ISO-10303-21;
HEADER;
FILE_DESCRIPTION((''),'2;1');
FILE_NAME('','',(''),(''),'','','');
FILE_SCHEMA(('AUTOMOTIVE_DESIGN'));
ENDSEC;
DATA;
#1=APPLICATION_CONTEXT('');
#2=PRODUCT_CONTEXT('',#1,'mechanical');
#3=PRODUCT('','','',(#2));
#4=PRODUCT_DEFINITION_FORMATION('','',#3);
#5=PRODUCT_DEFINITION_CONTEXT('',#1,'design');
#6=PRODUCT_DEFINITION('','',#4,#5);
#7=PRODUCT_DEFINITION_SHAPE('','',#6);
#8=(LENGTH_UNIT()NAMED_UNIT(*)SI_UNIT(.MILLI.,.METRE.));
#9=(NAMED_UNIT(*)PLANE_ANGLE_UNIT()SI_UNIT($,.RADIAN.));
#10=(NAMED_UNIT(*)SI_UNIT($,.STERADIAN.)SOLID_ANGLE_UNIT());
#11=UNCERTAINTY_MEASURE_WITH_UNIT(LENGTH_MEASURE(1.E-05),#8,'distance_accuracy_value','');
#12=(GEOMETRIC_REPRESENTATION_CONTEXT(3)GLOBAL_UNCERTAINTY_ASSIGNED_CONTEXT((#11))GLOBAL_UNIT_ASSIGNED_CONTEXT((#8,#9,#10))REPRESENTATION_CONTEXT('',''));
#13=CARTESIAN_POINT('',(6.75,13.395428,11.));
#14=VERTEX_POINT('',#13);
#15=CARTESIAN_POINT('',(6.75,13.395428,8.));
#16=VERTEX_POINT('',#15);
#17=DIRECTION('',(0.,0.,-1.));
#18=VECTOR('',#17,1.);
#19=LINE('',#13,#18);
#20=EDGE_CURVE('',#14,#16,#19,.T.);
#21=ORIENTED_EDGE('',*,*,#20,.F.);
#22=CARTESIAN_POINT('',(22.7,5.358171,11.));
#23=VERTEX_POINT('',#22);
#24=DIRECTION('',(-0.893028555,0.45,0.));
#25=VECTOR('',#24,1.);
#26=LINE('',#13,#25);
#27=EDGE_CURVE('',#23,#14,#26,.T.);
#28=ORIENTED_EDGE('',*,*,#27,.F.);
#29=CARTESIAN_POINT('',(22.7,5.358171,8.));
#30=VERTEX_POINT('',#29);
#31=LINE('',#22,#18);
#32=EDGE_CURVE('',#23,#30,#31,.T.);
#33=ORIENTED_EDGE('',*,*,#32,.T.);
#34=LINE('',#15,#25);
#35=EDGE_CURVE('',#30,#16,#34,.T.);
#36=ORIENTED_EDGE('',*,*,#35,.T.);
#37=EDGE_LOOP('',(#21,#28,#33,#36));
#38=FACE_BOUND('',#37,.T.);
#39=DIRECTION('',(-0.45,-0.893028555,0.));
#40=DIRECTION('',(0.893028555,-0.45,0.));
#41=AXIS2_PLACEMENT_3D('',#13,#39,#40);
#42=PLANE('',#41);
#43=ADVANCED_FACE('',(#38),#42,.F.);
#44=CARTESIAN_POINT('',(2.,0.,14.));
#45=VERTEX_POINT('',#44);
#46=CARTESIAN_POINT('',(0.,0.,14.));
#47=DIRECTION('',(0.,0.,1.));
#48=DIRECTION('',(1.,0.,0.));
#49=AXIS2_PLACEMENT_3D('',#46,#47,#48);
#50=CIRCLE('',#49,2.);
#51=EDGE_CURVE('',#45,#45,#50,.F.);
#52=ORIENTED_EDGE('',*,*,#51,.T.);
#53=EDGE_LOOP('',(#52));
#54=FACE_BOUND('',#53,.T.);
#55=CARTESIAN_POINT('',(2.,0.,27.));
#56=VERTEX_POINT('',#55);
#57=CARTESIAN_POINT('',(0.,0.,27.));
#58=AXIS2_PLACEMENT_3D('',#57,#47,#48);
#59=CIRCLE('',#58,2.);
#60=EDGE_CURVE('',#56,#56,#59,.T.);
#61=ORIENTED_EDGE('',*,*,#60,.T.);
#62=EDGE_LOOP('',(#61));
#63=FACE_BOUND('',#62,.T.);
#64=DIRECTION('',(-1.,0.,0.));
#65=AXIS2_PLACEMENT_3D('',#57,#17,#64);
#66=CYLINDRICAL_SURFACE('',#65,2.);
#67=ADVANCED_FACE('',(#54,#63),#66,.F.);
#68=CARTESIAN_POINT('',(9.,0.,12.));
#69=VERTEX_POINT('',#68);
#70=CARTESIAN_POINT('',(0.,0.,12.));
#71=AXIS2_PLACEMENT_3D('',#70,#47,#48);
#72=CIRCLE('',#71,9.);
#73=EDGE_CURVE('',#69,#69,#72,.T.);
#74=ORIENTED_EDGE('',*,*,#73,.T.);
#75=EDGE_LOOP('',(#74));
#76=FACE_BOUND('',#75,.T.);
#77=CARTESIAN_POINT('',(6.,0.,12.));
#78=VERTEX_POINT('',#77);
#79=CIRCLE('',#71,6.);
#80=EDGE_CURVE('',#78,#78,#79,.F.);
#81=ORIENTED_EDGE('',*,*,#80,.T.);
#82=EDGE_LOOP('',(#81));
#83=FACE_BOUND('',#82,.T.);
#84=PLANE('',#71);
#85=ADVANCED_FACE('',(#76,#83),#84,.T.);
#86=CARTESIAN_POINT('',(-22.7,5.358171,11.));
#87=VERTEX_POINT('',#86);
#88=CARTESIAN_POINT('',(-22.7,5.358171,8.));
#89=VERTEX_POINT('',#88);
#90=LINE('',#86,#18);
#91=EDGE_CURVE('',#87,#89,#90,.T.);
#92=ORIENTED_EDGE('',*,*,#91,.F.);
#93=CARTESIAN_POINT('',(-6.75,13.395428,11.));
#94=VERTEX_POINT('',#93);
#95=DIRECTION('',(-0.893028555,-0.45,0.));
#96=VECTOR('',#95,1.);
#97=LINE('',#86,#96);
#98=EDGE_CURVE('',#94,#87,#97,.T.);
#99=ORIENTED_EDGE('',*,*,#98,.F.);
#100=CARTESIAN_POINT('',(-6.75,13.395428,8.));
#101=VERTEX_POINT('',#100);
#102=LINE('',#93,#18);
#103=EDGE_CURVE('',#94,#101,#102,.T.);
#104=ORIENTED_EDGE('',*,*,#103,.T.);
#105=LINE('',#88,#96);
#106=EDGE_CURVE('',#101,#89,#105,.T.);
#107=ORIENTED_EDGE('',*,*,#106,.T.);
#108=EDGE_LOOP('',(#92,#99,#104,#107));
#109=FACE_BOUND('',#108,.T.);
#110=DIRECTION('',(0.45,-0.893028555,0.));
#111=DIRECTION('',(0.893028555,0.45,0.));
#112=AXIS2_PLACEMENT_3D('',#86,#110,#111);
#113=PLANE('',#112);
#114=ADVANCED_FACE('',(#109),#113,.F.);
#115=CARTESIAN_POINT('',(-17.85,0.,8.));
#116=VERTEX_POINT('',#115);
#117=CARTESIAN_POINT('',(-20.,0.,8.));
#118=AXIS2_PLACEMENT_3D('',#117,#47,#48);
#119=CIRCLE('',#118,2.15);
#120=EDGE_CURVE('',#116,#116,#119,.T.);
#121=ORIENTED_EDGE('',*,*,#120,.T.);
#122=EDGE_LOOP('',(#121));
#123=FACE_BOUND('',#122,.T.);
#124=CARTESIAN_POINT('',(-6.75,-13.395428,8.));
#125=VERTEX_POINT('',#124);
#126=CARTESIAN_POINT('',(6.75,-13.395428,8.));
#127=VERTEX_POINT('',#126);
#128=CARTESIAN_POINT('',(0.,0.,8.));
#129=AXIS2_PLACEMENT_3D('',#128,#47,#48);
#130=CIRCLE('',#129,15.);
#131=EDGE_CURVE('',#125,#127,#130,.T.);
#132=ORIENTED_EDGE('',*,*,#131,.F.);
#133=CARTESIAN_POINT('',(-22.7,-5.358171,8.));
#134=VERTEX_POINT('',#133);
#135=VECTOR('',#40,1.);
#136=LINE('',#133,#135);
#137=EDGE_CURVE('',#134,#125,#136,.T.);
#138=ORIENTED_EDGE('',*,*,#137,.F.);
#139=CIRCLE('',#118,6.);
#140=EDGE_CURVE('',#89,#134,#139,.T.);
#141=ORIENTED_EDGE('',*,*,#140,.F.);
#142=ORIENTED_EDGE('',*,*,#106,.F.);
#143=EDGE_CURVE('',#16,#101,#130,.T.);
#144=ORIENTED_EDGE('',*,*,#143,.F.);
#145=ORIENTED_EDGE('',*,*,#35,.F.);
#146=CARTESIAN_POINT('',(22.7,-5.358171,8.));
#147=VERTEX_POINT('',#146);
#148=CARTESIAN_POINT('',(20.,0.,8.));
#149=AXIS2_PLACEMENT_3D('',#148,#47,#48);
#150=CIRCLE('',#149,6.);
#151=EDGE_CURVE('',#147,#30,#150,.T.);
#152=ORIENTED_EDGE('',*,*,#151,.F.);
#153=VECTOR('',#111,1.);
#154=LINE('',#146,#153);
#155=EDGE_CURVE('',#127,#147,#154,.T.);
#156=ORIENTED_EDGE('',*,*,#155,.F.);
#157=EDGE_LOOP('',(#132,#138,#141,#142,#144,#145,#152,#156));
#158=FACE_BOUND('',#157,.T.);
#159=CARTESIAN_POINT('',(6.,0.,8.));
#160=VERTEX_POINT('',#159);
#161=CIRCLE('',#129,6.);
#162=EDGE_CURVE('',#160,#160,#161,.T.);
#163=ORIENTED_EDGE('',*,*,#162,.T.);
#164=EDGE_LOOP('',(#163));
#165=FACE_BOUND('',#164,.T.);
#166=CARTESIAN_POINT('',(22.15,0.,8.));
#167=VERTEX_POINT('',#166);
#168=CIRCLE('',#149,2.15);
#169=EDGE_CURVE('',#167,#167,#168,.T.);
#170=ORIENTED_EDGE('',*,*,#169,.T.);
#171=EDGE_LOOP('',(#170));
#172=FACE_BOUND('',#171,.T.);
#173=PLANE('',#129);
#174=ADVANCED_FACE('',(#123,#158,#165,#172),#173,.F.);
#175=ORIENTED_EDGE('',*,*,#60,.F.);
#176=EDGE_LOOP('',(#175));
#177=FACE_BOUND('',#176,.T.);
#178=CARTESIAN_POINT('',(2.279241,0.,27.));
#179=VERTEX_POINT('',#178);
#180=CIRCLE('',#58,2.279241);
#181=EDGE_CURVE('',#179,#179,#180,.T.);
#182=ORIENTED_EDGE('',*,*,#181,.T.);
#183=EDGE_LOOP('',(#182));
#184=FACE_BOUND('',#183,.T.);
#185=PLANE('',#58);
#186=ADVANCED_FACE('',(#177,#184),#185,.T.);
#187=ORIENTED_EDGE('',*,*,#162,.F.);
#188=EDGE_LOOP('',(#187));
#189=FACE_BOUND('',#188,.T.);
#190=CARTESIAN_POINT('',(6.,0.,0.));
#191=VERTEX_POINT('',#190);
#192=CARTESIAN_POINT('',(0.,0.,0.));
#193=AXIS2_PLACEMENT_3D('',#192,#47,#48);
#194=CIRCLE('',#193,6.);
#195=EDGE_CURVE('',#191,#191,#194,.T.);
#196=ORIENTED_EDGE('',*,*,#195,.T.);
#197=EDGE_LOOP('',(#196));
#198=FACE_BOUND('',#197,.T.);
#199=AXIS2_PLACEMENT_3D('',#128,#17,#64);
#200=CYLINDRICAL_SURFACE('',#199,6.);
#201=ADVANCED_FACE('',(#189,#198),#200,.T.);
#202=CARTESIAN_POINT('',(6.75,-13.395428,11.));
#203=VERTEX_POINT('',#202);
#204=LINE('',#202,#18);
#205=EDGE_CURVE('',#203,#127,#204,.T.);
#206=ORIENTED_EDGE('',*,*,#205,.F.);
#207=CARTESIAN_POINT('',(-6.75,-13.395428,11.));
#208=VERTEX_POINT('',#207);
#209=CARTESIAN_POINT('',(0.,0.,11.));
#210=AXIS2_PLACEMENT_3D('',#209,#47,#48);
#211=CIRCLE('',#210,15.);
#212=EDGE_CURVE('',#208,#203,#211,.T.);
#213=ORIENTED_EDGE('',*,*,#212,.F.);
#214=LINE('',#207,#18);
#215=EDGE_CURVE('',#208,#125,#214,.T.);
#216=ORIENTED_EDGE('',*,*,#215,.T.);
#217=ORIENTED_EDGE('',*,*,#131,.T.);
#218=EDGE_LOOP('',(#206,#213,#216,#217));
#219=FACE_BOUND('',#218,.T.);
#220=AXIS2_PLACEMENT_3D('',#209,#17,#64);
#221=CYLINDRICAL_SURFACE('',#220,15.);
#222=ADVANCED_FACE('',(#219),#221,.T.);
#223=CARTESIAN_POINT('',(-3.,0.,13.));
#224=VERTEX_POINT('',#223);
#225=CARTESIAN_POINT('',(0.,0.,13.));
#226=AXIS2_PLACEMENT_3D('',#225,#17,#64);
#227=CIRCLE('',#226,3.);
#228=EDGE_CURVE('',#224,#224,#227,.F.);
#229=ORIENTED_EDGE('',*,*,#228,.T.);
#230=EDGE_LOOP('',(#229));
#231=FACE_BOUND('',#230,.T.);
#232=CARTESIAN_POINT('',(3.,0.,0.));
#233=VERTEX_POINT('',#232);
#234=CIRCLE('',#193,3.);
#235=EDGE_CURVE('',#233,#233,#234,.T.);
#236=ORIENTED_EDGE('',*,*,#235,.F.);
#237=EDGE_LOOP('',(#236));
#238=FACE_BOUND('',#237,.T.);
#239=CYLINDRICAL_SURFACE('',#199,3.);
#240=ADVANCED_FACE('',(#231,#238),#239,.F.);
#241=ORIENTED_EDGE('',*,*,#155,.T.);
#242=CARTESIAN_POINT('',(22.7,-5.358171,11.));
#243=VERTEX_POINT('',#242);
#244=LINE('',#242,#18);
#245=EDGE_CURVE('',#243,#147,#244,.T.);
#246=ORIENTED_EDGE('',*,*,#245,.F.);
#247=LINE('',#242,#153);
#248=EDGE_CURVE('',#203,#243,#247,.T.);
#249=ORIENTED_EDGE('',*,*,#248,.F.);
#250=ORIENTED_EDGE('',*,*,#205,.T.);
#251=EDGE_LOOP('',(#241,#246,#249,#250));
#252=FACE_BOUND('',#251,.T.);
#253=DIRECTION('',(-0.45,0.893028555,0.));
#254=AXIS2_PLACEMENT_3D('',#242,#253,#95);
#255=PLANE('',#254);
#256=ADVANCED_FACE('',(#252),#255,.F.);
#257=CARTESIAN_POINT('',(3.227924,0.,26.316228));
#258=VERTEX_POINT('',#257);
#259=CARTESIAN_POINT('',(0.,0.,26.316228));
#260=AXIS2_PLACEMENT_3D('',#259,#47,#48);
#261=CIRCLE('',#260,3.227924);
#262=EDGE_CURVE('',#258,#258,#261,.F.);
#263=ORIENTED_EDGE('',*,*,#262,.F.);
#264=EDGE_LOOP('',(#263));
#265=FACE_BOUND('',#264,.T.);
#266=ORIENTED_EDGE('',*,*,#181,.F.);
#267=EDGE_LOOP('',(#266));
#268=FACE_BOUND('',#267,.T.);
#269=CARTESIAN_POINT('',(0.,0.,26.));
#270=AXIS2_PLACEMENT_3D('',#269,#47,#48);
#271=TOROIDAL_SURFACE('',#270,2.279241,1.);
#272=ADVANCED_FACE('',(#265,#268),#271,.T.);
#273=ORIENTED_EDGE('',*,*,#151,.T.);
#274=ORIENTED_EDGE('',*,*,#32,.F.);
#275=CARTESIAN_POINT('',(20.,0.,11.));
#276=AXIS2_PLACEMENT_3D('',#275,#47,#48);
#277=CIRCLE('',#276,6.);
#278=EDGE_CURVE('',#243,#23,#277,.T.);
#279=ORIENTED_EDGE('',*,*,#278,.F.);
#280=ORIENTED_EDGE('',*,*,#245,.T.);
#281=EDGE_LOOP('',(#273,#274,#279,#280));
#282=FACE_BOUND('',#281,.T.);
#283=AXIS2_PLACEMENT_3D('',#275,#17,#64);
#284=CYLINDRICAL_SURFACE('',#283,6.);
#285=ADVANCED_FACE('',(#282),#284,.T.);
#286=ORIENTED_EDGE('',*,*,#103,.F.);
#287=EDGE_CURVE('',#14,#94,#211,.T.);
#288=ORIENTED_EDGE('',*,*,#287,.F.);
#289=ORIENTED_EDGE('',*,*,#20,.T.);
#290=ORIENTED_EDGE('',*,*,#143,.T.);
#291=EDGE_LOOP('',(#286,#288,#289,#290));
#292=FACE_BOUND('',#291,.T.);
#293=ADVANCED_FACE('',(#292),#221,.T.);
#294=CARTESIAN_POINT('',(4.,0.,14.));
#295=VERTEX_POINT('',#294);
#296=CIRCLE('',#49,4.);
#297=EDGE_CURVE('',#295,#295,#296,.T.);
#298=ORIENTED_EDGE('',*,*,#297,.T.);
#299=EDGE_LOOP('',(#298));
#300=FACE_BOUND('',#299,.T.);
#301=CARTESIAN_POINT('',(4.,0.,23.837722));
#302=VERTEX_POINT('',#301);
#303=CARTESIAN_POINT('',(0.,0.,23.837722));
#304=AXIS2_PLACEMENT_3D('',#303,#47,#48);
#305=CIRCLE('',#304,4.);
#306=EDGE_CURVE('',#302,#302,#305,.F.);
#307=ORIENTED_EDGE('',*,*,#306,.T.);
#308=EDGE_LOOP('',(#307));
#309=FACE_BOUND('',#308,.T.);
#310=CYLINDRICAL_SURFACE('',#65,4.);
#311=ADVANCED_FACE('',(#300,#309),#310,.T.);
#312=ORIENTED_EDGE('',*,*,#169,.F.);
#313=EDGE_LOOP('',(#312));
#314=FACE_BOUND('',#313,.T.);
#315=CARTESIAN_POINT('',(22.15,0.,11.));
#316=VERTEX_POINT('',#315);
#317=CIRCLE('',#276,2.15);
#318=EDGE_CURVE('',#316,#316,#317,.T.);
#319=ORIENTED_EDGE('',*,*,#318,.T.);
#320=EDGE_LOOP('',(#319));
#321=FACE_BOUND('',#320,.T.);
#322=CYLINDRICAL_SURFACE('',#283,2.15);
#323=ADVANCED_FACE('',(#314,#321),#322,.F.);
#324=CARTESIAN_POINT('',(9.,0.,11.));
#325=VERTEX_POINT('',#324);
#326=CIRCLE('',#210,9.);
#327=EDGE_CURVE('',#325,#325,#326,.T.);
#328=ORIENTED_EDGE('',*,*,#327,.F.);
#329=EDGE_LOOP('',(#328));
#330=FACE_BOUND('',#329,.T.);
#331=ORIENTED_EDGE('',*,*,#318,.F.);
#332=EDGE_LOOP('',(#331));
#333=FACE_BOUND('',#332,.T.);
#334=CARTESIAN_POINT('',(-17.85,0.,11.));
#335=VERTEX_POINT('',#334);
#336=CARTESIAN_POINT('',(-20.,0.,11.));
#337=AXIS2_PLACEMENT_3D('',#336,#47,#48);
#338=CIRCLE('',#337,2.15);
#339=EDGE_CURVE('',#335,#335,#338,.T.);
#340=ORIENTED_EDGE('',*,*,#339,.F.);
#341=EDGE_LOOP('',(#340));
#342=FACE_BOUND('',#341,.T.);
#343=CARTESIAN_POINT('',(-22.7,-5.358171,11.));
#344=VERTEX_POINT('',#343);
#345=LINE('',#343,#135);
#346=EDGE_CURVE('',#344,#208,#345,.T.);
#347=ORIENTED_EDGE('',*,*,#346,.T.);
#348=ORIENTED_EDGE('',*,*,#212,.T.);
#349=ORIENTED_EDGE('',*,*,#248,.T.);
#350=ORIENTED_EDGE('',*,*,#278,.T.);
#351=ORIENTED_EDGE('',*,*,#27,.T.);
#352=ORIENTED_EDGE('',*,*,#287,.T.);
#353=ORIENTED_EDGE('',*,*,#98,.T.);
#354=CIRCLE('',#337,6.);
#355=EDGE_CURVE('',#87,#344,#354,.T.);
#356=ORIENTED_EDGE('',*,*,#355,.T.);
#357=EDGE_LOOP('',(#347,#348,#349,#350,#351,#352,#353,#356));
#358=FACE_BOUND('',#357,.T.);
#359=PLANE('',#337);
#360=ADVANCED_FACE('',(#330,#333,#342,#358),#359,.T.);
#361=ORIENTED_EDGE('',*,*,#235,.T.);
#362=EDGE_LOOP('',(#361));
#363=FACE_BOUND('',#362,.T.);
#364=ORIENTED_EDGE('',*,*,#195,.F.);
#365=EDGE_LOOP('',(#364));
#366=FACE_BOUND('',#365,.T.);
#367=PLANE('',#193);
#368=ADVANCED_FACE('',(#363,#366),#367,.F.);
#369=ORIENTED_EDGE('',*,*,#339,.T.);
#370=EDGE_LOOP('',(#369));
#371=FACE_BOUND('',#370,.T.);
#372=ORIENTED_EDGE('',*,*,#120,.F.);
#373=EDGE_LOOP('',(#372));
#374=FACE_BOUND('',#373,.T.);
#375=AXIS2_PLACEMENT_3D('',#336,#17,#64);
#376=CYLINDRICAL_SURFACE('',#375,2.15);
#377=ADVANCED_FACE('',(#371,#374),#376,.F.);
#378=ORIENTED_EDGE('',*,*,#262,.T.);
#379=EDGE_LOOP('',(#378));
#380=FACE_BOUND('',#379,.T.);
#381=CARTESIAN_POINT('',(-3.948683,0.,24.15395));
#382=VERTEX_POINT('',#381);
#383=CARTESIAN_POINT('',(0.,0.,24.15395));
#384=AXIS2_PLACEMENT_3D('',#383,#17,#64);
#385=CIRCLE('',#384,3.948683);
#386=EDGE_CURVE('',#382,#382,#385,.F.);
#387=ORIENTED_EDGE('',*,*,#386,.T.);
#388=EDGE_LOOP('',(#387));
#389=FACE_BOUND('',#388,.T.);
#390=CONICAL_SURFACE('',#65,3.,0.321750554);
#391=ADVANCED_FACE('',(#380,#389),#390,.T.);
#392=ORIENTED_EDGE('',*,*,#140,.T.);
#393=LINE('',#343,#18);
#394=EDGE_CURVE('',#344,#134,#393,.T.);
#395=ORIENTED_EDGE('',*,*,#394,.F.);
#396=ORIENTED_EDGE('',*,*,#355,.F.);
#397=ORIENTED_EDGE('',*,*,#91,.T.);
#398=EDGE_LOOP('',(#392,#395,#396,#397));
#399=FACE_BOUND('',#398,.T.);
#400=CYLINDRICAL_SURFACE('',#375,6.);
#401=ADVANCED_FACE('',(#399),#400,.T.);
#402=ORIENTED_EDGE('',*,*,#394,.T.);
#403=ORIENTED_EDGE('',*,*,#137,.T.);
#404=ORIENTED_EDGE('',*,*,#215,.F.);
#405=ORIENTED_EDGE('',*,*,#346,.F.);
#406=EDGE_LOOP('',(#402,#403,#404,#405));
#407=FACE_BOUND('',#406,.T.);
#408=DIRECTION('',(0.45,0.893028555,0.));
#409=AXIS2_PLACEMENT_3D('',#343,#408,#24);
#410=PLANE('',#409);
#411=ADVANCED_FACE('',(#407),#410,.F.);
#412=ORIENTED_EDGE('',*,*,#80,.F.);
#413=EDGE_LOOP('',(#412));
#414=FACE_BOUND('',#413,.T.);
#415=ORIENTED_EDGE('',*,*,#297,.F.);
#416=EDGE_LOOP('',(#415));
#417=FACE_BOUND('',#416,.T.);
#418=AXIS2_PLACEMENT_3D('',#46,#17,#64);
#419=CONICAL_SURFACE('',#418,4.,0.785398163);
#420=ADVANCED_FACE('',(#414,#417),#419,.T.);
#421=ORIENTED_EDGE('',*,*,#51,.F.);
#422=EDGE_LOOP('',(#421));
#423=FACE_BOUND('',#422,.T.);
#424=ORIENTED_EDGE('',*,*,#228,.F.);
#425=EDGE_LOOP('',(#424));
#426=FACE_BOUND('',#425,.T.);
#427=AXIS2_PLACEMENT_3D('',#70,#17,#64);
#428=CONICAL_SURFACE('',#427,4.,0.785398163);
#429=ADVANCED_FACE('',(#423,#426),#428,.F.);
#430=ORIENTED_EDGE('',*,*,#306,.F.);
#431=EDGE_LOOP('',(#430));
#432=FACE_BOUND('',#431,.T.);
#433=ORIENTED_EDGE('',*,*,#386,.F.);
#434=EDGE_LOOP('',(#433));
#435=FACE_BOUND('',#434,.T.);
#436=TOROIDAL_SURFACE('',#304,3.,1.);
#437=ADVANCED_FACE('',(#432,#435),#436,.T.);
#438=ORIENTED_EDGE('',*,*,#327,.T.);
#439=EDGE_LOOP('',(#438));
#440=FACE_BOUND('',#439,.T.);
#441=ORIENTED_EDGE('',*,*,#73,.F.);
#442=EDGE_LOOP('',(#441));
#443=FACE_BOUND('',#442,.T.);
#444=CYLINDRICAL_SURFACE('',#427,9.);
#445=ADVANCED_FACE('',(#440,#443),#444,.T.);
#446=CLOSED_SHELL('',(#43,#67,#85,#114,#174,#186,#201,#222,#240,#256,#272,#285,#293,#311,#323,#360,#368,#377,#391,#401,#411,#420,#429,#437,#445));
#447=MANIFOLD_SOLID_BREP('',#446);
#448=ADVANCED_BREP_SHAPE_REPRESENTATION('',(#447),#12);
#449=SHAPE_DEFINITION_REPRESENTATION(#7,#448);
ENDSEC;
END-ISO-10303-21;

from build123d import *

# Parameters (mm, degrees)
SKETCH_1_R      = 6
SKETCH_1_R_2    = 3
EXTRUDE_1_DEPTH = 8
SKETCH_2_R      = 9
SKETCH_2_R_2    = 3
EXTRUDE_2_DEPTH = 4
SKETCH_3_R      = 4
SKETCH_3_R_2    = 2
EXTRUDE_3_DEPTH = 15
CHAMFER_1_SIZE  = 2
CHAMFER_2_SIZE  = 3
CHAMFER_2_SIZE2 = 1
FILLET_1_R      = 1
SKETCH_4_R      = 9
SKETCH_4_R_2    = 2.15
EXTRUDE_5_DEPTH = 3


with BuildPart() as part:
    # 草图1 → 凸台-拉伸1 (new body)
    with BuildSketch(Plane.XY):
        Circle(SKETCH_1_R)
        Circle(SKETCH_1_R_2, mode=Mode.SUBTRACT)
    extrude(amount=EXTRUDE_1_DEPTH)

    # 草图2 → 凸台-拉伸2 (add)
    with BuildSketch(Plane.XY.offset(8)):
        Circle(SKETCH_2_R)
        Circle(SKETCH_2_R_2, mode=Mode.SUBTRACT)
    extrude(amount=EXTRUDE_2_DEPTH)

    # 草图3 → 凸台-拉伸3 (add)
    with BuildSketch(Plane.XY.offset(12)):
        Circle(SKETCH_3_R)
        Circle(SKETCH_3_R_2, mode=Mode.SUBTRACT)
    extrude(amount=EXTRUDE_3_DEPTH)

    # 倒角1
    # the kernel refuses this chamfer: 2 mm, written as the material it adds along each edge
    with BuildSketch(Plane(origin=(0, 0, 12), x_dir=(1, 0, 0), z_dir=(0, -1, 0))) as chamfer_1_piece_1:
        Polygon((4 + CHAMFER_1_SIZE, 0), (4, CHAMFER_1_SIZE), (4, 0), align=None)
    revolve(axis=Axis((0, 0, 12), (0, 0, 1)))
    # the kernel refuses this chamfer: 2 mm, written as the material it takes off along each edge
    with BuildSketch(Plane(origin=(0, 0, 12), x_dir=(1, 0, 0), z_dir=(0, -1, 0))) as chamfer_1_2_piece_1_section:
        Polygon((2 + CHAMFER_1_SIZE, 0), (2, CHAMFER_1_SIZE), (2, 0), align=None)
    chamfer_1_2_piece_1 = revolve(axis=Axis((0, 0, 12), (0, 0, 1)), mode=Mode.PRIVATE)
    chamfer_1_2_piece_1 = chamfer_1_2_piece_1 & Plane(origin=(0, 0, 13.507652587), x_dir=(1, 0, 0), z_dir=(0, 0, -1)) * Cylinder(3, 16, mode=Mode.PRIVATE)
    add(chamfer_1_2_piece_1, mode=Mode.SUBTRACT)

    # 倒角2
    chamfer_2_edges = [part.edges().sort_by_distance(p)[0] for p in [
        (-4, 0, 27),
    ]]
    chamfer_2_side = [part.faces().sort_by_distance(p)[0] for p in [
        (-4, 0, 20.5),
    ]]
    chamfer(chamfer_2_edges, length=CHAMFER_2_SIZE, length2=CHAMFER_2_SIZE2, reference=chamfer_2_side[0])

    # 圆角1
    fillet_1_edges = [part.edges().sort_by_distance(p)[0] for p in [
        (-3, 0, 27),
        (-4, 0, 24),
    ]]
    fillet(fillet_1_edges, radius=FILLET_1_R)

    # 草图4 → 凸台-拉伸5 (add)
    with BuildSketch(Plane.XY.offset(8)):
        with BuildLine():
            Line((-22.7, 5.35817133), (-6.75, 13.395428325))
            ThreePointArc((-6.75, 13.395428325), (0, 15), (6.75, 13.395428325))
            Line((6.75, 13.395428325), (22.7, 5.35817133))
            ThreePointArc((22.7, 5.35817133), (26, 0), (22.7, -5.35817133))
            Line((22.7, -5.35817133), (6.75, -13.395428325))
            ThreePointArc((6.75, -13.395428325), (0, -15), (-6.75, -13.395428325))
            Line((-6.75, -13.395428325), (-22.7, -5.35817133))
            ThreePointArc((-22.7, -5.35817133), (-26, 0), (-22.7, 5.35817133))
        make_face()
        Circle(SKETCH_4_R, mode=Mode.SUBTRACT)
        with Locations((20, 0)):
            Circle(SKETCH_4_R_2, mode=Mode.SUBTRACT)
        with Locations((-20, 0)):
            Circle(SKETCH_4_R_2, mode=Mode.SUBTRACT)
    extrude(amount=EXTRUDE_5_DEPTH)


solid = part.part
